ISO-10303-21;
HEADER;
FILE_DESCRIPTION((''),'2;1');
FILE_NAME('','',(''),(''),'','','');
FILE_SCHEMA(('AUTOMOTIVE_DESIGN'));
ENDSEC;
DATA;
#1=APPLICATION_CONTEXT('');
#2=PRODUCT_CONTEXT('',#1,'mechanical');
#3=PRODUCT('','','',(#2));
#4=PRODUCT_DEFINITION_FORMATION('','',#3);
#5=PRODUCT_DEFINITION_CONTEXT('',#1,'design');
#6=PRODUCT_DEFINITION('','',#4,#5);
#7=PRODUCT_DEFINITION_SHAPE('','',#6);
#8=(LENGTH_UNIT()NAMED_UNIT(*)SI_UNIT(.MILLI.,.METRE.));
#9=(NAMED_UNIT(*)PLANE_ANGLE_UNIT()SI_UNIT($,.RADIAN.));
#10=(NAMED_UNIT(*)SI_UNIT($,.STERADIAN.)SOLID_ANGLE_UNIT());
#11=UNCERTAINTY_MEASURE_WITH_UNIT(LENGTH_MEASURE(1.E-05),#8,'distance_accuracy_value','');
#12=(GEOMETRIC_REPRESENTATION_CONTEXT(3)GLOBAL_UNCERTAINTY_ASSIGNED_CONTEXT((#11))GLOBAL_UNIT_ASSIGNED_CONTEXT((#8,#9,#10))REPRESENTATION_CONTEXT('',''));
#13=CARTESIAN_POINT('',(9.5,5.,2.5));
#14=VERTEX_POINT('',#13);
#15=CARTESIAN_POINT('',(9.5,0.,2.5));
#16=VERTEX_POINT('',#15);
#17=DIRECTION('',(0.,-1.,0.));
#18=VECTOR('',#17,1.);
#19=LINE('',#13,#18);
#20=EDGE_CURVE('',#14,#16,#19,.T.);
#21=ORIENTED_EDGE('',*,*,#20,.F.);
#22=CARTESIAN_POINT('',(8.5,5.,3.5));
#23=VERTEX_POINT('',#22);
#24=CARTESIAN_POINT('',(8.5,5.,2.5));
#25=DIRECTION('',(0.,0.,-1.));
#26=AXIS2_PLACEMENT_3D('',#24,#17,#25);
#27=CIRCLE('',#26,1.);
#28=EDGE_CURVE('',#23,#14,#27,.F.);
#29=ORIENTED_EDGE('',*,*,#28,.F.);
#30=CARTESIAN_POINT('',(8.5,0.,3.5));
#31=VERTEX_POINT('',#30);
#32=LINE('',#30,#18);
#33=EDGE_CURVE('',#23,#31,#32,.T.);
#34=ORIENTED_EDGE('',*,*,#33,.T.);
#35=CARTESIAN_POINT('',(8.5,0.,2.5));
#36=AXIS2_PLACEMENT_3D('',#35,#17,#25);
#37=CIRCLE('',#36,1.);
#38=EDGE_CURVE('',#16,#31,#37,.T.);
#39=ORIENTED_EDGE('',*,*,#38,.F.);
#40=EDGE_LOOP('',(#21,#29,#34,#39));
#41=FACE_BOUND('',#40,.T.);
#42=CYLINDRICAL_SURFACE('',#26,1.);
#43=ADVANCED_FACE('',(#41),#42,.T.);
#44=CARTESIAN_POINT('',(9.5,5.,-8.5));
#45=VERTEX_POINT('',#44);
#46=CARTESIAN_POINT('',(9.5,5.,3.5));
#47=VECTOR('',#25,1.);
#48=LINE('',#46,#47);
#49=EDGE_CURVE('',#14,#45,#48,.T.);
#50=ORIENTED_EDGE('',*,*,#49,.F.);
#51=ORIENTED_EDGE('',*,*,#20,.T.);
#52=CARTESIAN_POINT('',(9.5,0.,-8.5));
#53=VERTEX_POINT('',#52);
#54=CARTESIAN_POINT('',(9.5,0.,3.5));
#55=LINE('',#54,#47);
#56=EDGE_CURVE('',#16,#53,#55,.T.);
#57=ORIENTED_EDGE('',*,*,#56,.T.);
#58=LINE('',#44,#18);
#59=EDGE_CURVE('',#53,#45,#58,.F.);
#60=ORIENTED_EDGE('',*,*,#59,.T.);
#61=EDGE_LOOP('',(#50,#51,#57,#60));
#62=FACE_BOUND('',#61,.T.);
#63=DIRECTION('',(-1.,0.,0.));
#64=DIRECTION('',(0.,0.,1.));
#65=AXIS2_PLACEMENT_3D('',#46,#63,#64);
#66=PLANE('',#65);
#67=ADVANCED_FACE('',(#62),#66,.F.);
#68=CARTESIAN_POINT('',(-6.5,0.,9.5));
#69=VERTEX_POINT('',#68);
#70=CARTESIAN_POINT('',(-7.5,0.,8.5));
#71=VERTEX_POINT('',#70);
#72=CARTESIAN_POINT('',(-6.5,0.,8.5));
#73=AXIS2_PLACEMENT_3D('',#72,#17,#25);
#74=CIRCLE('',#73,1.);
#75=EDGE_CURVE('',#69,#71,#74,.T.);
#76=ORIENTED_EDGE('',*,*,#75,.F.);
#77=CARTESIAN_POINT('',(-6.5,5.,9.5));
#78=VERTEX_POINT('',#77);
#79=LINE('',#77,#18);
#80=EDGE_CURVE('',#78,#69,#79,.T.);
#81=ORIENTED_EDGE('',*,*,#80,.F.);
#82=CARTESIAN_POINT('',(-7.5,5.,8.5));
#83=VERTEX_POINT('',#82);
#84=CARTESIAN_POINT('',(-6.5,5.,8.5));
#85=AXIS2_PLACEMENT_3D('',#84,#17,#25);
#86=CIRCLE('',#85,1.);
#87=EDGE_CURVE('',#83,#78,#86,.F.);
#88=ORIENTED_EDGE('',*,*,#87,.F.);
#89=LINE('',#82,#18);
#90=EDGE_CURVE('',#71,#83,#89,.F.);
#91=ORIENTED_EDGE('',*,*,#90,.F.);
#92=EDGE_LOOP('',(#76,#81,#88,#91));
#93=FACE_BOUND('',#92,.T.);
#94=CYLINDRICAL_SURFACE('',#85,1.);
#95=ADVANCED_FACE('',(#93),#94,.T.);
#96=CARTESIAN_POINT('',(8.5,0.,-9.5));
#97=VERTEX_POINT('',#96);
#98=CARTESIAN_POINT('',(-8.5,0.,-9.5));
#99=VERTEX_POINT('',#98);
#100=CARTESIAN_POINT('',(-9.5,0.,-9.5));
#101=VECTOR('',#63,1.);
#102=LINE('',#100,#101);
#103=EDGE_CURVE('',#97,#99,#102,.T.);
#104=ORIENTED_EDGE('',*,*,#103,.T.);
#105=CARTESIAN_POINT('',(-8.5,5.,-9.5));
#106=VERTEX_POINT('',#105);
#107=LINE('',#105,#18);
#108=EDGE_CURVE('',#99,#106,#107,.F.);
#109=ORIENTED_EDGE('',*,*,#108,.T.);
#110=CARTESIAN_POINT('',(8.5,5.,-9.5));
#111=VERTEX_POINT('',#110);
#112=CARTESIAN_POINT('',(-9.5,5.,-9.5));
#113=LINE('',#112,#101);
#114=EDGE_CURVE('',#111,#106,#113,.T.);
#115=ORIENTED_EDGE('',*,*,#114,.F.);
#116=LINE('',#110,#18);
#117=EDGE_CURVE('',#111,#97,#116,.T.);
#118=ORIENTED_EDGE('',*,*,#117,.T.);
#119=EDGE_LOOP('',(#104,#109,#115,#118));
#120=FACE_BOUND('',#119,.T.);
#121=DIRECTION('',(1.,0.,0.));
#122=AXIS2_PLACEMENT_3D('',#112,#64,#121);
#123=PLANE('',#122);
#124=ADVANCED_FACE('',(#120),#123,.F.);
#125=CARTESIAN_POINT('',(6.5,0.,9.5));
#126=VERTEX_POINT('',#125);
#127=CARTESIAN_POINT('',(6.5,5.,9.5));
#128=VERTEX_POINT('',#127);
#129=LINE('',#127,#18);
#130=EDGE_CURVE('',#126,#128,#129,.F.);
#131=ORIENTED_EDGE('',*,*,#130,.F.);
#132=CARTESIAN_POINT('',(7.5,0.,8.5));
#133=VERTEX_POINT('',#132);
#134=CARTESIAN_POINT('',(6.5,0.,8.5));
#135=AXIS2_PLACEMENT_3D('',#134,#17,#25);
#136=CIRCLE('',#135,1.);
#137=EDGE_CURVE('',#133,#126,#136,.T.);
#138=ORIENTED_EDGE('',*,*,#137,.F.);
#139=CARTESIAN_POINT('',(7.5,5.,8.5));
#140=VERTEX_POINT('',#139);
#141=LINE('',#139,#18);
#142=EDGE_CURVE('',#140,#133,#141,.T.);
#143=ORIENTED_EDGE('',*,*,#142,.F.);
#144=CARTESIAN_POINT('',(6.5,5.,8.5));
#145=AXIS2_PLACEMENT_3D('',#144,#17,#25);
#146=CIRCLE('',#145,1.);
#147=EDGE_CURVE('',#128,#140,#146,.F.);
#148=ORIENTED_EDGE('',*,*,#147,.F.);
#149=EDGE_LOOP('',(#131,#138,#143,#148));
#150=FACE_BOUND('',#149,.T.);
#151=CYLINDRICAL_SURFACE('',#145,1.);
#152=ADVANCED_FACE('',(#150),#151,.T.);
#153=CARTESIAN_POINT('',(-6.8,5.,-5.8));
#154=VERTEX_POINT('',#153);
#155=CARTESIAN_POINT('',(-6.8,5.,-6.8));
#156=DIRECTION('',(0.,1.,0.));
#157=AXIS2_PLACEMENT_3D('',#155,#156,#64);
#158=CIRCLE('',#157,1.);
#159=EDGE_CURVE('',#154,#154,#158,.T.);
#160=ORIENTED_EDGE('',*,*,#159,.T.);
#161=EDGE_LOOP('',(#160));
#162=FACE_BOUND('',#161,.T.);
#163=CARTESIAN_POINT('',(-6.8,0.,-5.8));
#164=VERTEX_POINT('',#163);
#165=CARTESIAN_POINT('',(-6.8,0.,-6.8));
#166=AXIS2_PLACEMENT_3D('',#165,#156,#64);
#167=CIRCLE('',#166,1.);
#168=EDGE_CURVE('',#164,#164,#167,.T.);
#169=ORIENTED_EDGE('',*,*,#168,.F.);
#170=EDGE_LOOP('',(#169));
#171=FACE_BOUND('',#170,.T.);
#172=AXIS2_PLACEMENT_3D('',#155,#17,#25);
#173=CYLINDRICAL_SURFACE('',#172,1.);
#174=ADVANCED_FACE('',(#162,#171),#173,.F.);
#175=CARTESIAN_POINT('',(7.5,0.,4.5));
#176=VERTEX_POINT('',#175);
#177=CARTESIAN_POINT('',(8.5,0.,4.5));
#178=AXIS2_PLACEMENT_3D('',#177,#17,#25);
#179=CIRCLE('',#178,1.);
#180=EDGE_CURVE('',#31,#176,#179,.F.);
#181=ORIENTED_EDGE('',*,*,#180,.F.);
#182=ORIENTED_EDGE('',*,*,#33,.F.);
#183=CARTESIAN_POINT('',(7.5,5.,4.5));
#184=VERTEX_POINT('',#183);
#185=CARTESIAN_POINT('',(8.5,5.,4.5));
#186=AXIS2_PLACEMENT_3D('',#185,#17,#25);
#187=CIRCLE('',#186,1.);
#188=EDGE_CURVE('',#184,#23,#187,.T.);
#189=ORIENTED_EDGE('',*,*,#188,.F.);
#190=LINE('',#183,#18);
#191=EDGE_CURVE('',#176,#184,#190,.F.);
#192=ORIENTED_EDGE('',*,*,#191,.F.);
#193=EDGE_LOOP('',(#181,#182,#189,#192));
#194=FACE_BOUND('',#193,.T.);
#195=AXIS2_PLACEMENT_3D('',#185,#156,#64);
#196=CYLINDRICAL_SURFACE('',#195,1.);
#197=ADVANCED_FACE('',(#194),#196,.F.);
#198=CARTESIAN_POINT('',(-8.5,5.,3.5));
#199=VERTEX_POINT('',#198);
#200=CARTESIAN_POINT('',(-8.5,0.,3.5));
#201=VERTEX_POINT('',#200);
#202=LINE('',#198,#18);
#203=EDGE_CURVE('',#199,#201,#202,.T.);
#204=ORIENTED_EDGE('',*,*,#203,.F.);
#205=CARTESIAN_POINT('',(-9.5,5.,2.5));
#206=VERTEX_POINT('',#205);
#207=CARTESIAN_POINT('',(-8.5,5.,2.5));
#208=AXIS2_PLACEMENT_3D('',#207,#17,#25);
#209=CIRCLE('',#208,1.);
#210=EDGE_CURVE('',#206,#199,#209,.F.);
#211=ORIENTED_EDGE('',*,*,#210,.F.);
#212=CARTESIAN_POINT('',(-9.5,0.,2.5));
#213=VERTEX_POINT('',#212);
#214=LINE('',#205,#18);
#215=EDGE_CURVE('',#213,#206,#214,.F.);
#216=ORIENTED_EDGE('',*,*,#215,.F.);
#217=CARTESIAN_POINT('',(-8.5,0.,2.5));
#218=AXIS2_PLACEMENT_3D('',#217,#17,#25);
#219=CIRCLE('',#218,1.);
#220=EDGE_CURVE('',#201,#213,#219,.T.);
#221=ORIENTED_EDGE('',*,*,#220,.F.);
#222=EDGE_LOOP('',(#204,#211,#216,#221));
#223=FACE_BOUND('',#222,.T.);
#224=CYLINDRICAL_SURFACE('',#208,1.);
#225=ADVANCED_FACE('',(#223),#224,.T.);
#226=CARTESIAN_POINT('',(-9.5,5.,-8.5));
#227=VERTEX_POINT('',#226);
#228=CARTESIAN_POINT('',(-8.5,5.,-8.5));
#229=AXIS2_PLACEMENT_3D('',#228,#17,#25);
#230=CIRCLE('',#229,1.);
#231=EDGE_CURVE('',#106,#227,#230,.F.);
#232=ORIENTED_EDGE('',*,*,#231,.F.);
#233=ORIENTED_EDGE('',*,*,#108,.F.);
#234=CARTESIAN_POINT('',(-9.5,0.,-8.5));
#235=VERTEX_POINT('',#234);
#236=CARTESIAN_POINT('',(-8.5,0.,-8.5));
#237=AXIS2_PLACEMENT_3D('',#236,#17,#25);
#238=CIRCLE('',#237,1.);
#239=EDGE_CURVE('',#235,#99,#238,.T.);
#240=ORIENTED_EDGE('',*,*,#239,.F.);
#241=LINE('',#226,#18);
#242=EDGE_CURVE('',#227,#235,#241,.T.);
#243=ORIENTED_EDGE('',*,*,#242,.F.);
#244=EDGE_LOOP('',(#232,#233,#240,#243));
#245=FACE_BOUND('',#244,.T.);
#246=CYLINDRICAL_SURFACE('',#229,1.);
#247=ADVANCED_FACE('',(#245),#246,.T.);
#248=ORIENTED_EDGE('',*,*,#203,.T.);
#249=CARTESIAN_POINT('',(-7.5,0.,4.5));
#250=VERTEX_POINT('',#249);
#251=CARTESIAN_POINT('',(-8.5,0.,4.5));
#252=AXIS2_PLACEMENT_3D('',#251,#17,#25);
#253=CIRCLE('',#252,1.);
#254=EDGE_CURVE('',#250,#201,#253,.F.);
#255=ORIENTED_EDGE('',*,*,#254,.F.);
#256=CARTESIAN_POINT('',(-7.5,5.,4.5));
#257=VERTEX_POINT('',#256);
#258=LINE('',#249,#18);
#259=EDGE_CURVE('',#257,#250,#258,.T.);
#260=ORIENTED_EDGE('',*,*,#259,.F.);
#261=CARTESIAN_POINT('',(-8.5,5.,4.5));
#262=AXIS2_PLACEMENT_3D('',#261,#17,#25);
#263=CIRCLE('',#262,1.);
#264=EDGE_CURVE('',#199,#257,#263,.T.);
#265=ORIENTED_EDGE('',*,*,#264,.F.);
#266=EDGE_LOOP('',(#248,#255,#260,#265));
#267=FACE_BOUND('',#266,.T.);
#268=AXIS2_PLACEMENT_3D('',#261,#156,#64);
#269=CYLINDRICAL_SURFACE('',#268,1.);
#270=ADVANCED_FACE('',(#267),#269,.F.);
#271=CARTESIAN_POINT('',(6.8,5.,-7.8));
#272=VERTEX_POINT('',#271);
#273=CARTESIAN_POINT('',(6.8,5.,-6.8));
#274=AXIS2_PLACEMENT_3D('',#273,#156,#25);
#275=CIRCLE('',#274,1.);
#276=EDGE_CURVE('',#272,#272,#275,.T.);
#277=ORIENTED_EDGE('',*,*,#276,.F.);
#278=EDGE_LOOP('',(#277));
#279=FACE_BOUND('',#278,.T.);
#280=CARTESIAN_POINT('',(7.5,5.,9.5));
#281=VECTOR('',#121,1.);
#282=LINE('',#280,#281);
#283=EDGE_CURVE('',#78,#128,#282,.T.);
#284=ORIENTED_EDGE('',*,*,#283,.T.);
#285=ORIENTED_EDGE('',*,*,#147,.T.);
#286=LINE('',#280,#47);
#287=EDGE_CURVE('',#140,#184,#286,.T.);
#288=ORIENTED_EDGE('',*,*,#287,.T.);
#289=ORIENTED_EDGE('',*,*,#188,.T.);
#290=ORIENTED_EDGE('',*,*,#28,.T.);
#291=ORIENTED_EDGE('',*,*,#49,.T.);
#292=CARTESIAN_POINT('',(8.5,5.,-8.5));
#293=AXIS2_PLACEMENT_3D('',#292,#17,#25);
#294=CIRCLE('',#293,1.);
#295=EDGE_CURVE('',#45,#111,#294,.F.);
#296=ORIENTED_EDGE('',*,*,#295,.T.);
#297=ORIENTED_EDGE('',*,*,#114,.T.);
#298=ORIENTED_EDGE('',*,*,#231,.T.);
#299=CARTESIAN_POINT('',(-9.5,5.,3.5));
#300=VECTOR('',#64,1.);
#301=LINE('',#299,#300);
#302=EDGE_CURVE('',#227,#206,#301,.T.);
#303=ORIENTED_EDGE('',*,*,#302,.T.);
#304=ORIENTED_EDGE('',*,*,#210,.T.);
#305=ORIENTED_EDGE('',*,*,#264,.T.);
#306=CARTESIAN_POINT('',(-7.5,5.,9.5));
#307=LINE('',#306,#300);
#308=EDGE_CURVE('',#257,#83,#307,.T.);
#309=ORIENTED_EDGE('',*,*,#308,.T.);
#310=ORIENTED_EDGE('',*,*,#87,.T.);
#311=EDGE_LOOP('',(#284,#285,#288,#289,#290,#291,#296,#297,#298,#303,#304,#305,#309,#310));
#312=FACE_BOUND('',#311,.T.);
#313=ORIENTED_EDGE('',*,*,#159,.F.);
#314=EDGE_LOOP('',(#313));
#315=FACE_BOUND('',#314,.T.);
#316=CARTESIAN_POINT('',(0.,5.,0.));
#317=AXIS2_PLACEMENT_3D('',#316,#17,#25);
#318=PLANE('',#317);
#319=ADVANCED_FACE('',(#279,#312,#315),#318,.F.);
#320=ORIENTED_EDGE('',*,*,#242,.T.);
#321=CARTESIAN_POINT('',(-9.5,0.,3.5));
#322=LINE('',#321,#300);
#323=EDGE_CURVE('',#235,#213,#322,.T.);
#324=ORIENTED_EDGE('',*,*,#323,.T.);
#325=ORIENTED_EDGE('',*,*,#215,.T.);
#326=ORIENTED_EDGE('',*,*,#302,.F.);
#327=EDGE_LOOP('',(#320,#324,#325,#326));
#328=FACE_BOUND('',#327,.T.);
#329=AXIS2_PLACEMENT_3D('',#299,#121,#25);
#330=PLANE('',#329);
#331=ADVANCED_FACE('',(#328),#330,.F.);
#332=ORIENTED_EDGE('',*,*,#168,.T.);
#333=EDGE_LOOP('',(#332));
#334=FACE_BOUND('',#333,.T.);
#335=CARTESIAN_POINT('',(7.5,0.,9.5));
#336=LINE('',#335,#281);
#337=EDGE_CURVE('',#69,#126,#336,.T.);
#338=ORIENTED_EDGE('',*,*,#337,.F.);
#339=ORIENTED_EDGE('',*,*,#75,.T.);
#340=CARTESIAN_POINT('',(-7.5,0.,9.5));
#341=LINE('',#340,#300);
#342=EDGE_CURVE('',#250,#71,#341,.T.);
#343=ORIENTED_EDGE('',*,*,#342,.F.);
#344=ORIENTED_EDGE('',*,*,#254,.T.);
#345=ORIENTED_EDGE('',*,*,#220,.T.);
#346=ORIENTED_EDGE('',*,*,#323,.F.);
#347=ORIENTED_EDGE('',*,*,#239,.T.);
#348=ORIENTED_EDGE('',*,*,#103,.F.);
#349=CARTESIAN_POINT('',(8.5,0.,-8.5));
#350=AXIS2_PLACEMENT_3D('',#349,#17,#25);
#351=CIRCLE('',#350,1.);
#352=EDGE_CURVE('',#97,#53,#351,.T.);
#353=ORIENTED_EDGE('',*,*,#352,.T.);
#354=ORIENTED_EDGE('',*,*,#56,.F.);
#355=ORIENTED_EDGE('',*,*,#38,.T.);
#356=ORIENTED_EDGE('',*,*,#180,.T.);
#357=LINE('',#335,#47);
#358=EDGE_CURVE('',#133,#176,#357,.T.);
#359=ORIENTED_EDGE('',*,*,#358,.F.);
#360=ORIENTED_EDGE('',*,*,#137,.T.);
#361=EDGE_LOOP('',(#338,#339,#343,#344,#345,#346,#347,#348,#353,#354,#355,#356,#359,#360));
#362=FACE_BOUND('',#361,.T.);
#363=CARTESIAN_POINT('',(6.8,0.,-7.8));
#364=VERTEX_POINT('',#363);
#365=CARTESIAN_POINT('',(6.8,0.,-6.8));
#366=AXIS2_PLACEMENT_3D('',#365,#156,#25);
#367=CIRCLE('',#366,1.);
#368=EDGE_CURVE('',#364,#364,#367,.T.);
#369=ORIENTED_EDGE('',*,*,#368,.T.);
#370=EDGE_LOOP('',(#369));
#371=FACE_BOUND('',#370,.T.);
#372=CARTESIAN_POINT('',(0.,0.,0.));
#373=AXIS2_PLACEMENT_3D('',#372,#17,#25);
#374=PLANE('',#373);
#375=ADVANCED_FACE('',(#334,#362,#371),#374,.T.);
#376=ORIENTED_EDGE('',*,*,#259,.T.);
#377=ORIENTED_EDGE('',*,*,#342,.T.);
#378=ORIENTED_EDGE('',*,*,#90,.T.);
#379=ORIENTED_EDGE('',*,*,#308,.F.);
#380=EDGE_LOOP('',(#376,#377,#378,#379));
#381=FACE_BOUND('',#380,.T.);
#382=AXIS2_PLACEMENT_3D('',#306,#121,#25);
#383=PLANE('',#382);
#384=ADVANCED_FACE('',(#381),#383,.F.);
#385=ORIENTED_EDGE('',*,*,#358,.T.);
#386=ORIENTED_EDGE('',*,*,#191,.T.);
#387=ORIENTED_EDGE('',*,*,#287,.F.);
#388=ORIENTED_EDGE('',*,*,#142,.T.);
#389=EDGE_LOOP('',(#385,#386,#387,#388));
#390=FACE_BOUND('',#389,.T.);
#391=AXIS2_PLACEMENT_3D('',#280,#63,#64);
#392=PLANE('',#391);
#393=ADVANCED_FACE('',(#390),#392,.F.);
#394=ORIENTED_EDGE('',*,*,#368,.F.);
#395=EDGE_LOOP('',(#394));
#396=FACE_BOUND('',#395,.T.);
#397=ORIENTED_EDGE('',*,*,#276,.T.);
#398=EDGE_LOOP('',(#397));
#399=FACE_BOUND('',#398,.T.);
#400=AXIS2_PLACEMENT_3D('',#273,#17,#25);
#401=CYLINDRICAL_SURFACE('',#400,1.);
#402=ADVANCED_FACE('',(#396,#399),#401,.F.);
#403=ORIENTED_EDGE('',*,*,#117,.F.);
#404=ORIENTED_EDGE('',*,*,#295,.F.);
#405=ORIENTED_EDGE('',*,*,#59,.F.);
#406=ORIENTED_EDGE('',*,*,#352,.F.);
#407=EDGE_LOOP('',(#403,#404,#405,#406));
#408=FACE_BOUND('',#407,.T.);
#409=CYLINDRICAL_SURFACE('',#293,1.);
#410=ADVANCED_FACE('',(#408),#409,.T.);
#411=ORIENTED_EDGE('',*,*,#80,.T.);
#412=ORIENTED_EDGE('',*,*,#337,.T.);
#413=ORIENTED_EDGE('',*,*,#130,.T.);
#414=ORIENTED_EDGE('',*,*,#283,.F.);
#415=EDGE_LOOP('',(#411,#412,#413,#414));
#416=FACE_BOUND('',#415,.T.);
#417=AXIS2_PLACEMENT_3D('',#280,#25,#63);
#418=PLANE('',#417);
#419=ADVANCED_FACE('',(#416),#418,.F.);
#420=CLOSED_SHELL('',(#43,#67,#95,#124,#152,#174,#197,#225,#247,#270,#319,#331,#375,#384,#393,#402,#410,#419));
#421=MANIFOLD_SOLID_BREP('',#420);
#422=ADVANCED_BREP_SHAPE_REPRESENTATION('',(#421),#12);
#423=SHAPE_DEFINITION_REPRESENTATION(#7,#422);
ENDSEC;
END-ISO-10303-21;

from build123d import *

# Parameters (mm, degrees)
ESQUISSE2_R        = 1
BOSS_EXTRU_1_DEPTH = 5
CONG_1_R           = 1


with BuildPart() as part:
    # Esquisse2 → Boss.-Extru.1 (new body)
    with BuildSketch(Plane(origin=(0, 0, 0), x_dir=(1, 0, 0), z_dir=(0, 1, 0))):
        Polygon((-9.5, -3.5), (-9.5, 9.5), (9.5, 9.5), (9.5, -3.5), (7.5, -3.5), (7.5, -9.5), (-7.5, -9.5), (-7.5, -3.5), align=None)
        with Locations(Location((-6.8, 6.8, 0), (0, 0, 270))):
            Circle(ESQUISSE2_R, mode=Mode.SUBTRACT)
        with Locations(Location((6.8, 6.8, 0), (0, 0, 90))):
            Circle(ESQUISSE2_R, mode=Mode.SUBTRACT)
    extrude(amount=BOSS_EXTRU_1_DEPTH)

    # Congé1
    cong_1_edges = [part.edges().sort_by_distance(p)[0] for p in [
        (9.5, 2.5, -9.5),
        (9.5, 2.5, 3.5),
        (7.5, 2.5, 3.5),
        (7.5, 2.5, 9.5),
        (-7.5, 2.5, 9.5),
        (-7.5, 2.5, 3.5),
        (-9.5, 2.5, 3.5),
        (-9.5, 2.5, -9.5),
    ]]
    fillet(cong_1_edges, radius=CONG_1_R - 0.0001)  # a hair under: the kernel refuses the full size


solid = part.part
